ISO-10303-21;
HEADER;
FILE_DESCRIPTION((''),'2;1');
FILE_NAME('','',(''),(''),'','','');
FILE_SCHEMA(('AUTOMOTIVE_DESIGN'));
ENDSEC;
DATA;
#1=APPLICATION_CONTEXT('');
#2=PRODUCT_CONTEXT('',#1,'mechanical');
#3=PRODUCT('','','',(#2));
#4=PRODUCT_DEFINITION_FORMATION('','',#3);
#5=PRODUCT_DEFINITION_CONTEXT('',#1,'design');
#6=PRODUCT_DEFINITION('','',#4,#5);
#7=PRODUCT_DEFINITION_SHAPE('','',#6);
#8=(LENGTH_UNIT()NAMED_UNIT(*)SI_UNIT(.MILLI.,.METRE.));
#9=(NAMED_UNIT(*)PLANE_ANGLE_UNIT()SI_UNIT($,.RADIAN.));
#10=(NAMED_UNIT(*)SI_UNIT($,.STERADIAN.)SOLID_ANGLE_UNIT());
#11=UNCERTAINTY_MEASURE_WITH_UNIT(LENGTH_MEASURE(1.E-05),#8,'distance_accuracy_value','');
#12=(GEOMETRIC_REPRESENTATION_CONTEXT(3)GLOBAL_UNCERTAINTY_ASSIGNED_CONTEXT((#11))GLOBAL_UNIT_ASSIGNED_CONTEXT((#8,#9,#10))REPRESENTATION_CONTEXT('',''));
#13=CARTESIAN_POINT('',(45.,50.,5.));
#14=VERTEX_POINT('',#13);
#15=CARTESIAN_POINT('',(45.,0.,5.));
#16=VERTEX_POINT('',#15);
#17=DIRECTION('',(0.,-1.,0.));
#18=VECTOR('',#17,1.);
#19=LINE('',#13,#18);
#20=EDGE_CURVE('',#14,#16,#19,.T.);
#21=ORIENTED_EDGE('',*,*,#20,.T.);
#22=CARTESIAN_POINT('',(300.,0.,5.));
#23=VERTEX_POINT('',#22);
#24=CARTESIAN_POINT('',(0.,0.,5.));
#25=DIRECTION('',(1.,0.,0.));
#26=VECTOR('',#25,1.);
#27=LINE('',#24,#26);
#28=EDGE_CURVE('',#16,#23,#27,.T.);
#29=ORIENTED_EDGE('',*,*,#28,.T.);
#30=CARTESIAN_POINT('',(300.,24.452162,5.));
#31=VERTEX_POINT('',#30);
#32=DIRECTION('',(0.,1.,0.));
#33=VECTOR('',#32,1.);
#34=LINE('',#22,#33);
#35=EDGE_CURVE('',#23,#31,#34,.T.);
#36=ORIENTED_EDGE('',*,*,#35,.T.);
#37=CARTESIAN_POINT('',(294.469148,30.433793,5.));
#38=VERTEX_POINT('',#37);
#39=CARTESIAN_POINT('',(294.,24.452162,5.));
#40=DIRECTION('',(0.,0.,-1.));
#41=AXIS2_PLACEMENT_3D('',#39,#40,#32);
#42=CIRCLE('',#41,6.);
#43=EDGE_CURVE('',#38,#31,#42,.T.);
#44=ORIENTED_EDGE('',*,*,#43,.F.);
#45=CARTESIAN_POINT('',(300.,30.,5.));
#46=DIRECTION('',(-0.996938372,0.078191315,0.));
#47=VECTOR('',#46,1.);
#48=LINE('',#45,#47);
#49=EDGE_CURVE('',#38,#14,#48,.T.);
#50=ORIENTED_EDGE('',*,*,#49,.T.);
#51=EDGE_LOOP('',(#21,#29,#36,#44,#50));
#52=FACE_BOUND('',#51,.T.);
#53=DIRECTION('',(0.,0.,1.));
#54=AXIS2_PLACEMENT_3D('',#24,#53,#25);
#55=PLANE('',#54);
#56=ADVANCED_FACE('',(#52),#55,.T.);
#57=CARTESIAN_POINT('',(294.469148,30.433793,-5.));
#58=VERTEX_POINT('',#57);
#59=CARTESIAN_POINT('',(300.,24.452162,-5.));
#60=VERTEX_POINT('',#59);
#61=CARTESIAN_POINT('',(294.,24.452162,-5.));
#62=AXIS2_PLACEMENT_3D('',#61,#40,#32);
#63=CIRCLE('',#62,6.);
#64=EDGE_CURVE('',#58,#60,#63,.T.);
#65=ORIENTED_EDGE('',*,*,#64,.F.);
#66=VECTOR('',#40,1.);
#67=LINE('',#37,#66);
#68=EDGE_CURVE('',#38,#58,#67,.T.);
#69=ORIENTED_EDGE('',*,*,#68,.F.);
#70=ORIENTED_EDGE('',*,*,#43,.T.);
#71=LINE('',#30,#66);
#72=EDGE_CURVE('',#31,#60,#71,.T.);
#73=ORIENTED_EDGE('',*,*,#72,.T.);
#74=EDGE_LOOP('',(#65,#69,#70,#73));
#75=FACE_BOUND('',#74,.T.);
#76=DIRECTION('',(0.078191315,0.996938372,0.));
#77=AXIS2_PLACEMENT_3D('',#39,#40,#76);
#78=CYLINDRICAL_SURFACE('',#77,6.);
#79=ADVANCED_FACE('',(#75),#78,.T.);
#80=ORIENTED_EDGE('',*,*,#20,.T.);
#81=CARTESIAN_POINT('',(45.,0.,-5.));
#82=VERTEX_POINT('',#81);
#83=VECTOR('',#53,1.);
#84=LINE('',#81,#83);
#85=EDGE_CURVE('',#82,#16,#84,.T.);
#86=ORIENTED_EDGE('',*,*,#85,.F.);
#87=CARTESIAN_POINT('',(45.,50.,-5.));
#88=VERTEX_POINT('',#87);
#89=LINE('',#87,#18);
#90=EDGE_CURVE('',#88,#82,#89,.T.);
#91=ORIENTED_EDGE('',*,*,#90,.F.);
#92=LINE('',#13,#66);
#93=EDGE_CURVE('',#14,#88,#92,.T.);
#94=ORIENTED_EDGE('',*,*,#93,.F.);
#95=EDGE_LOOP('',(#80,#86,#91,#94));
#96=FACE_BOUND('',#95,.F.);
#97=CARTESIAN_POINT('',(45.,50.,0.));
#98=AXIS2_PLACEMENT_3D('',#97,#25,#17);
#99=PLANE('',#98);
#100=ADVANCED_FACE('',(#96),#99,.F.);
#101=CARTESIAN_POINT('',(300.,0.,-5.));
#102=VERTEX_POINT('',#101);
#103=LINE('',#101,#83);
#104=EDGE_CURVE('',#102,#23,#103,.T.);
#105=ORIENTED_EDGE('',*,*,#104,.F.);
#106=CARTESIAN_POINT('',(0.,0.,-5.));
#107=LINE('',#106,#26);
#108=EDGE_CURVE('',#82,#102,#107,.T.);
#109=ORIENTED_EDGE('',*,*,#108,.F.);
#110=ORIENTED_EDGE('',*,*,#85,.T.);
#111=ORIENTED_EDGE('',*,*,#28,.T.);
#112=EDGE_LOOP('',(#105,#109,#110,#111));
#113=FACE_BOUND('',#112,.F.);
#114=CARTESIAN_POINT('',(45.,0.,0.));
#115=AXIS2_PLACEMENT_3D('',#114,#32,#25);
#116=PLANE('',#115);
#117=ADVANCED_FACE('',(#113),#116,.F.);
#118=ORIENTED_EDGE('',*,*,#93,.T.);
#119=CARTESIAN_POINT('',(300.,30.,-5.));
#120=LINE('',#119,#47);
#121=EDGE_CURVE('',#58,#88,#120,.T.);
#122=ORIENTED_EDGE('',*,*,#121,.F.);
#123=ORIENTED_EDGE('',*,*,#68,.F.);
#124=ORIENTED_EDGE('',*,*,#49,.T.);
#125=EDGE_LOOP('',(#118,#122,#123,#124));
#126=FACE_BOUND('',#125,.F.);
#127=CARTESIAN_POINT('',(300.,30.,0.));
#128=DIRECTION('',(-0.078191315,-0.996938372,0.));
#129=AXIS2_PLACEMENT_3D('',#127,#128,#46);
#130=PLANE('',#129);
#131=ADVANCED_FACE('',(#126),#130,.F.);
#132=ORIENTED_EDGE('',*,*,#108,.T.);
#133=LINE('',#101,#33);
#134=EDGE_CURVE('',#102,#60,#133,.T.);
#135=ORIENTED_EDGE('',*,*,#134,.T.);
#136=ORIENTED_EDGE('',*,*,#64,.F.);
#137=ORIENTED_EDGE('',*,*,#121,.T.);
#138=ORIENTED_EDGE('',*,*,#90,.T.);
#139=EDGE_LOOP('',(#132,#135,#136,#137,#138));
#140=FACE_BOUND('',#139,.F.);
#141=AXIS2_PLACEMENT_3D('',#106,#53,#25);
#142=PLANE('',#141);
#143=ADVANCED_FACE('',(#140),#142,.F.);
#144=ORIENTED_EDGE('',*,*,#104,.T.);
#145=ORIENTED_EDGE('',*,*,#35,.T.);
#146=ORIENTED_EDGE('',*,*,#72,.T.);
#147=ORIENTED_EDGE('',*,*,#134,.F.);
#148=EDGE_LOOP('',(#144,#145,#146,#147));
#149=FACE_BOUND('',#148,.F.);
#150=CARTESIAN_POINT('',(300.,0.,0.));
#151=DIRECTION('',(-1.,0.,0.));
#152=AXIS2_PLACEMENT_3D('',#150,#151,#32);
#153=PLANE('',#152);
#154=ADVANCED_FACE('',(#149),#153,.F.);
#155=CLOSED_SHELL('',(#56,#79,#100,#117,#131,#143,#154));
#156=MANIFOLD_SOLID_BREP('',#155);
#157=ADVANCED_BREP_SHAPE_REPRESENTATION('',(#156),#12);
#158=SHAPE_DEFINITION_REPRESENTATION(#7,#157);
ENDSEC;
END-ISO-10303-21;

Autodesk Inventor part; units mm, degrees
ref_plane "YZ Plane" through (0, 0, 0) normal (1, 0, 0) x (0, 1, 0)
ref_plane "XZ Plane" through (0, 0, 0) normal (0, 1, 0) x (-1, 0, 0)
ref_plane "XY Plane" through (0, 0, 0) normal (0, 0, 1) x (1, 0, 0)
sketch "Sketch3" plane through (0, 0, 0) normal (0, 0, 1) x (1, 0, 0)
  line L0 (0, 0) -> (300, 0)
  line L1 (300, 0) -> (300, 30)
  line L2 (300, 30) -> (-5.542, 53.9641)
  line L3 (45, 50) -> (45, 0)
  dimension "d11" = 300
  dimension "d12" = 30
  dimension "d13" = 45
  dimension "d14" = 50
extrude "Plate1" add sketch "Sketch3" along normal mid plane 10
fillet "Corner Round1" radius 6 1 edges at (300, 30, 0)
equation "\"d15\" = Thickness"
equation "\"BendReliefDepth\" = 0.5 * Thickness"
equation "\"Thickness\" = 10"
properties part number "PRS 1614 charging hatch reinf 500mm" material "Steel"
